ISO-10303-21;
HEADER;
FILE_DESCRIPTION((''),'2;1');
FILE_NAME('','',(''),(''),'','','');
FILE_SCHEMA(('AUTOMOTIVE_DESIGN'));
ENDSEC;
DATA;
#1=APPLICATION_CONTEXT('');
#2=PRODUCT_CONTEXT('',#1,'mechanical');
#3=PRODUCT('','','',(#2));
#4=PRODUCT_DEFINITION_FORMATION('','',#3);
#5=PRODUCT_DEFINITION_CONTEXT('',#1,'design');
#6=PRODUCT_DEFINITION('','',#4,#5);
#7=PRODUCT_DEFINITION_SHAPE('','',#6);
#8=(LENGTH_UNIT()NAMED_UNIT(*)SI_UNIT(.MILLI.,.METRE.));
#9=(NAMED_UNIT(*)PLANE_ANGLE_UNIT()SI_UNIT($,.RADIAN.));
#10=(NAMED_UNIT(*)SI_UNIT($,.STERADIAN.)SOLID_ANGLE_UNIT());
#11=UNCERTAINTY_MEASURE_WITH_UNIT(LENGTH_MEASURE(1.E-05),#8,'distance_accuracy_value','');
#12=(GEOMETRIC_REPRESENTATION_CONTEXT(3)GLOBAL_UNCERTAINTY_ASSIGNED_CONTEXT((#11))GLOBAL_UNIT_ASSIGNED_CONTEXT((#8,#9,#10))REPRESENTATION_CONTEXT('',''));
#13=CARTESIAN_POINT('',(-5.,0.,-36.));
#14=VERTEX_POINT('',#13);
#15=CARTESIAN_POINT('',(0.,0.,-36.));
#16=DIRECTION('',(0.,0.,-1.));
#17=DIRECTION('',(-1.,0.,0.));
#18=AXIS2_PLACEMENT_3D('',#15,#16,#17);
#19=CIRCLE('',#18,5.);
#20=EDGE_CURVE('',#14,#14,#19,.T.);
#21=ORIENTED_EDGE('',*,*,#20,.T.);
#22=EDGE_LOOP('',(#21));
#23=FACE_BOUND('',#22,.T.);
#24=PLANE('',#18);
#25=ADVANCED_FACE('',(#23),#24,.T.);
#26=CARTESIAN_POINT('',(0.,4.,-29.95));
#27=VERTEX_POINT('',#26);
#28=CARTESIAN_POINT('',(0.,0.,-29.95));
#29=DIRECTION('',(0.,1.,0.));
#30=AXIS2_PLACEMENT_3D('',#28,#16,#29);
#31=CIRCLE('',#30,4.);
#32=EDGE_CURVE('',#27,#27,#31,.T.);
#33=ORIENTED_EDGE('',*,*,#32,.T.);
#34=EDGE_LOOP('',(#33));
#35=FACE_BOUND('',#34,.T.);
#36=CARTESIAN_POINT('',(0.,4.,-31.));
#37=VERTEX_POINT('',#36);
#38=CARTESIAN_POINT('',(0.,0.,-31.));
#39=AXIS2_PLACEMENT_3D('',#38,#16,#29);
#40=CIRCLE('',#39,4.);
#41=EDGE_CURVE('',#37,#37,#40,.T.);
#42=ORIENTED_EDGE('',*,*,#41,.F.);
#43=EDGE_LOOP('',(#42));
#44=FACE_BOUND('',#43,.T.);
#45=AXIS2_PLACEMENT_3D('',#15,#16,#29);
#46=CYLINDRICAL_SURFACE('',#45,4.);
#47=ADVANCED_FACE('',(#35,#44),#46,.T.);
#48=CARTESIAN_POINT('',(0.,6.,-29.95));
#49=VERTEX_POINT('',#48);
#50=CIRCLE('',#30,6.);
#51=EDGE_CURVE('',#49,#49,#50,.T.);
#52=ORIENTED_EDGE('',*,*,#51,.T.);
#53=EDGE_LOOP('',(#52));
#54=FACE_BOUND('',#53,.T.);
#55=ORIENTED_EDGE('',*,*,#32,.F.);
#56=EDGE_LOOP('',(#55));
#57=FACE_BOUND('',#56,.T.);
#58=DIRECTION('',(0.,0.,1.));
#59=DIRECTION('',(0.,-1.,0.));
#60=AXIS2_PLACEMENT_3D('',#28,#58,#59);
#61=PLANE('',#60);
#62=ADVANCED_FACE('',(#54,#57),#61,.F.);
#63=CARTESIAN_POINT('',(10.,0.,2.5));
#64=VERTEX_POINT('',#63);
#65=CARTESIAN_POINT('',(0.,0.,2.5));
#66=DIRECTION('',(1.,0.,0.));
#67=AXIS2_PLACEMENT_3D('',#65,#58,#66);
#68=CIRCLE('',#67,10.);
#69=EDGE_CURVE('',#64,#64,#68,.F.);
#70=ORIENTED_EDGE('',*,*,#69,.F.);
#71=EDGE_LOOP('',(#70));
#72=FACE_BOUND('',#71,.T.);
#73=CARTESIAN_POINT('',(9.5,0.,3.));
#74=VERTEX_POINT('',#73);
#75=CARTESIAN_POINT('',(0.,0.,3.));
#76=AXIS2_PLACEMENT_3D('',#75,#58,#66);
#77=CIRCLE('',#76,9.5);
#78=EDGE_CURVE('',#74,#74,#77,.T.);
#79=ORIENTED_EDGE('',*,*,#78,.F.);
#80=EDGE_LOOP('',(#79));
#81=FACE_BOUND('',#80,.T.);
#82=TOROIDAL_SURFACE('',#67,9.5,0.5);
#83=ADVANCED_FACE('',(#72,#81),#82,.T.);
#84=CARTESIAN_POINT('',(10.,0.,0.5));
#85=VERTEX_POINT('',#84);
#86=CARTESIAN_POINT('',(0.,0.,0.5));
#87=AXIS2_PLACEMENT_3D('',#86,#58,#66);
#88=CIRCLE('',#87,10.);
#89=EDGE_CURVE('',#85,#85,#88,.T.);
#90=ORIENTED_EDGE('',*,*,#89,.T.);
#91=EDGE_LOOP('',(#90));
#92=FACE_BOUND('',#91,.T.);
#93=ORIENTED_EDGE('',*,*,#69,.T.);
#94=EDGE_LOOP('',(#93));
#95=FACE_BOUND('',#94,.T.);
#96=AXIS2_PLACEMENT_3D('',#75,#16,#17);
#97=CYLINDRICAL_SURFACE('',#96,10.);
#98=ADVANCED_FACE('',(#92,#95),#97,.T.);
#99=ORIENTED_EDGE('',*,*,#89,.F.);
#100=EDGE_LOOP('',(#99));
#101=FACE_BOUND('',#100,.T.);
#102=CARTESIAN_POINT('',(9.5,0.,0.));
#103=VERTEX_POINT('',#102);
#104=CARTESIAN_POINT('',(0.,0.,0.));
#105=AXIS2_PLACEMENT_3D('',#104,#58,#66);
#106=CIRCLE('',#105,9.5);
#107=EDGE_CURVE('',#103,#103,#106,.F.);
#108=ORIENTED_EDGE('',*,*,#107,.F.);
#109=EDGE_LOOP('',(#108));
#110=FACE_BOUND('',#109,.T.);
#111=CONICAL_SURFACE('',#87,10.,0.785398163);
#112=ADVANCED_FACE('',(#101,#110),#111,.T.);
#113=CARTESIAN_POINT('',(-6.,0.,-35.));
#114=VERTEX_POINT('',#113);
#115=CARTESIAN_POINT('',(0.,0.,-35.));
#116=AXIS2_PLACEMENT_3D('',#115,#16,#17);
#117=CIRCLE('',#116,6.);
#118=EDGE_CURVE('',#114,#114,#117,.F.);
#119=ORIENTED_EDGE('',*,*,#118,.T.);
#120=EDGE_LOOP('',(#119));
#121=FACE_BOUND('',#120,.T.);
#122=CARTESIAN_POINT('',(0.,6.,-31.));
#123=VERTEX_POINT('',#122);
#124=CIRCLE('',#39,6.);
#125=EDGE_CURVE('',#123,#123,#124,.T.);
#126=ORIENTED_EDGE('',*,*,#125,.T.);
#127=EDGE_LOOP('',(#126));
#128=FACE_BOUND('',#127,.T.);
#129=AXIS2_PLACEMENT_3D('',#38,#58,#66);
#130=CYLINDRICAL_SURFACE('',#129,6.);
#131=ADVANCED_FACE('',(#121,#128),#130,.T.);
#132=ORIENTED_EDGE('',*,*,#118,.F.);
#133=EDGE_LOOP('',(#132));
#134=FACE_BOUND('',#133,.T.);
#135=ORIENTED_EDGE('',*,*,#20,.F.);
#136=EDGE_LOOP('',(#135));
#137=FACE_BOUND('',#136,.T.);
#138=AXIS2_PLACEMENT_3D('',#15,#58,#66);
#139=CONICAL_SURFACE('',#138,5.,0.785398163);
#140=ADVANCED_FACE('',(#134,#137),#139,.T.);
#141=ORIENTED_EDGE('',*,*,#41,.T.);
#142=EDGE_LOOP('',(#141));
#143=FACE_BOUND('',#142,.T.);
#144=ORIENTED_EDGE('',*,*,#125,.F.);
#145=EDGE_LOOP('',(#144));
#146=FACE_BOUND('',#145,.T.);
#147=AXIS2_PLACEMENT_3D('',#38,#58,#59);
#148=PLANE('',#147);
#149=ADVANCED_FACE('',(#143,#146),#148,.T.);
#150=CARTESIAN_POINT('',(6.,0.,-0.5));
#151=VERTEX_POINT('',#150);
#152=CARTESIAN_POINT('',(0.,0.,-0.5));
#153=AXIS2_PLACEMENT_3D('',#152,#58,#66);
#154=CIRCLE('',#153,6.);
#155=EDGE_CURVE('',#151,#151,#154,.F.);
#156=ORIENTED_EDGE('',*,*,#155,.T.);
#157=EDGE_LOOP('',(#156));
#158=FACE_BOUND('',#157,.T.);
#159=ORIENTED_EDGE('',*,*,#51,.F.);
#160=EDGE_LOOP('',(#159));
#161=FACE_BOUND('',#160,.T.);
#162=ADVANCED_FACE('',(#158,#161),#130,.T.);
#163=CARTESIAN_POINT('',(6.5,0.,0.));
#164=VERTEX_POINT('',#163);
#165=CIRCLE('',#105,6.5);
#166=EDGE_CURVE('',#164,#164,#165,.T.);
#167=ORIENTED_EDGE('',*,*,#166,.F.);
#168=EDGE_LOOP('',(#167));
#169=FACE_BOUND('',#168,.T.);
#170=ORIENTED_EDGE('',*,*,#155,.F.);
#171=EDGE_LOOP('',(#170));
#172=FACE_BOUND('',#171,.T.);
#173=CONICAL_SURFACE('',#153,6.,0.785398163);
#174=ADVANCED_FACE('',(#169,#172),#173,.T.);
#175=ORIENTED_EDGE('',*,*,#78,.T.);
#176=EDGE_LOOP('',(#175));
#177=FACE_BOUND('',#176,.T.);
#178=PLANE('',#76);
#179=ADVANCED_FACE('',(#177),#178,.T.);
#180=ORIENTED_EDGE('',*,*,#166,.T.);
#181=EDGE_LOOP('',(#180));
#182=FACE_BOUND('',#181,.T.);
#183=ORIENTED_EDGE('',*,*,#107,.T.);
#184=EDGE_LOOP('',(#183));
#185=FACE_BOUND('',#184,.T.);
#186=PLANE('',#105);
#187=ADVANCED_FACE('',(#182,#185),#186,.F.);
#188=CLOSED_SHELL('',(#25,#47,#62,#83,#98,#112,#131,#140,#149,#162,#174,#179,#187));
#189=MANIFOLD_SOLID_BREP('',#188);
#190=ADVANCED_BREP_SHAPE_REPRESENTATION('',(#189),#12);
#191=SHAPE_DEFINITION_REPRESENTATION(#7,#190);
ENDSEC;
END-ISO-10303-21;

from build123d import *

# Parameters (mm, degrees)
SKETCH1_R           = 10
BOSS_EXTRUDE1_DEPTH = 3
FILLET1_R           = 0.5
SKETCH2_R           = 6
BOSS_EXTRUDE2_DEPTH = 31
CHAMFER1_SIZE       = 0.5
SKETCH3_R           = 6
BOSS_EXTRUDE3_DEPTH = 5
SKETCH4_W           = 1.05
SKETCH4_H           = 2
CHAMFER2_SIZE       = 1


with BuildPart() as part:
    # Sketch1 → Boss-Extrude1 (new body)
    with BuildSketch(Plane.XY):
        Circle(SKETCH1_R)
    extrude(amount=BOSS_EXTRUDE1_DEPTH)

    # Fillet1
    fillet1_edges = [part.edges().sort_by_distance(p)[0] for p in [
        (-10, 0, 3),
    ]]
    fillet(fillet1_edges, radius=FILLET1_R)

    # Sketch2 → Boss-Extrude2 (add)
    with BuildSketch(Plane(origin=(0, 0, 0), x_dir=(-1, 0, 0), z_dir=(0, 0, -1))):
        Circle(SKETCH2_R)
    extrude(amount=BOSS_EXTRUDE2_DEPTH)

    # Chamfer1
    chamfer1_edges = [part.edges().sort_by_distance(p)[0] for p in [
        (-10, 0, 0),
        (6, 0, 0),
    ]]
    chamfer(chamfer1_edges, length=CHAMFER1_SIZE)

    # Sketch3 → Boss-Extrude3 (add)
    with BuildSketch(Plane(origin=(0, 0, -31), x_dir=(-1, 0, 0), z_dir=(0, 0, -1))):
        Circle(SKETCH3_R)
    extrude(amount=BOSS_EXTRUDE3_DEPTH)

    # Sketch4 → Cut-Revolve1 (revolve, cut)
    with BuildSketch(Plane(origin=(0, 0, 0), x_dir=(0, 0, -1), z_dir=(1, 0, 0))):
        with Locations((30.475, 5)):
            Rectangle(SKETCH4_W, SKETCH4_H)
    revolve(axis=Axis((0, 0, -36), (0, 0, 1)), mode=Mode.SUBTRACT)

    # Chamfer2
    chamfer2_edges = [part.edges().sort_by_distance(p)[0] for p in [
        (6, 0, -36),
    ]]
    chamfer(chamfer2_edges, length=CHAMFER2_SIZE)


solid = part.part
